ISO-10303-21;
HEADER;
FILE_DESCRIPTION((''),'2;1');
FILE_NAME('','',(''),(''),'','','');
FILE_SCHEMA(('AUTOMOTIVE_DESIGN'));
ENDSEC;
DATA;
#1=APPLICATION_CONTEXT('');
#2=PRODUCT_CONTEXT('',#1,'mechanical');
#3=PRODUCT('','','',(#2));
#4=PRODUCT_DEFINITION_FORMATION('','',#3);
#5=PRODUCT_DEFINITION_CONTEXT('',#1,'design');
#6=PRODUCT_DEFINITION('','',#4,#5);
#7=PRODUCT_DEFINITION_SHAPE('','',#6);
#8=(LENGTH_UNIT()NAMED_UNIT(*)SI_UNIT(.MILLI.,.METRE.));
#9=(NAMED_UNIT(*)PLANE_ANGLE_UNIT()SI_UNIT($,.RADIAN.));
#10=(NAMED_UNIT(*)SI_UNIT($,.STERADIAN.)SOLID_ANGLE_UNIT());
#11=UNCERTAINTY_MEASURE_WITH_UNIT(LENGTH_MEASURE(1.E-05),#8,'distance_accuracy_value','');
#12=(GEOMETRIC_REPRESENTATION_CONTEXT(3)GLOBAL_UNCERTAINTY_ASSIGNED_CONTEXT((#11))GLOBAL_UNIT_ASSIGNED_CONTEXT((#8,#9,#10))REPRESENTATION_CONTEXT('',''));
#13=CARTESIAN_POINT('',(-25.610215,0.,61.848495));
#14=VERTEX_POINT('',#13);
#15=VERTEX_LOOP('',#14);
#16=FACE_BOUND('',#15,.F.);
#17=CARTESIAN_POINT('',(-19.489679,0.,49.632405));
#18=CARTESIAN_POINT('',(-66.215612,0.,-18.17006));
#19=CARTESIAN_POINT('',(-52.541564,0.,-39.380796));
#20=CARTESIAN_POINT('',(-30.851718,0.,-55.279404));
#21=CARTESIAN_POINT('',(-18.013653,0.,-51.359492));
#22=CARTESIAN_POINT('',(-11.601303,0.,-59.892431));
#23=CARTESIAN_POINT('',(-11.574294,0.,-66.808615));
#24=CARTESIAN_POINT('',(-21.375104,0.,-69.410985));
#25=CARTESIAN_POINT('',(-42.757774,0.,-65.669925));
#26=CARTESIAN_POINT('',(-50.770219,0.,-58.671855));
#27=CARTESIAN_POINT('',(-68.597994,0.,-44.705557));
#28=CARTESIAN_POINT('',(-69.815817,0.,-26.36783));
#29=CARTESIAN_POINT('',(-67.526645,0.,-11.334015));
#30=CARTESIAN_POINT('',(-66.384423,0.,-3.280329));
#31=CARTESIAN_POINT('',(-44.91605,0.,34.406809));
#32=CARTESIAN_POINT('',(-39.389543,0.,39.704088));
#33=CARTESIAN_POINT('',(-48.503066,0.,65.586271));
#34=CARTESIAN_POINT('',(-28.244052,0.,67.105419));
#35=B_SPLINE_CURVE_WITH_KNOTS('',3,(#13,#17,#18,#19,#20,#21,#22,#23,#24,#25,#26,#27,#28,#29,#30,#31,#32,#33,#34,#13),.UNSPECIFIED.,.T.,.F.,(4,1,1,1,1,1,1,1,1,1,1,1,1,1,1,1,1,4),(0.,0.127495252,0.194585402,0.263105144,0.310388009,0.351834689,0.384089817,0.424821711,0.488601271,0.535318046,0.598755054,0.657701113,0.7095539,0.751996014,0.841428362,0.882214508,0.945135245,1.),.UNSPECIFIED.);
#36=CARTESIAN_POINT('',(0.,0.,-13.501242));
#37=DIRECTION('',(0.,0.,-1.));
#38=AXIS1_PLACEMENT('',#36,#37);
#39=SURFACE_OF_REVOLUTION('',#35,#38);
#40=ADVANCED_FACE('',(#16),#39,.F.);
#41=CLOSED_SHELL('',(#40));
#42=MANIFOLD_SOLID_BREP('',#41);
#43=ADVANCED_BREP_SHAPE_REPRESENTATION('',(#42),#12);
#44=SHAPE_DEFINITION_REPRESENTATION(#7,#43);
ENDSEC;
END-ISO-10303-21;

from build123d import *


with BuildPart() as f1:
    # F0 (on Front) → F1 (revolve)
    with BuildSketch(Plane.XZ):
        with BuildLine():
            add(Edge.make_bspline(
                [(-25.6102147929, 61.8484951556), (-19.4896790224, 49.6324052715), (-66.2156119978, -18.1700595461), (-52.5415644786, -39.3807960779), (-30.8517184463, -55.2794042637), (-18.0136531138, -51.3594918991), (-11.6013032839, -59.8924308511), (-11.5742936307, -66.8086153132), (-21.3751043638, -69.4109851577), (-42.7577735512, -65.6699253484), (-50.7702194774, -58.671854983), (-68.5979939867, -44.7055573728), (-69.8158166263, -26.367830304), (-67.5266448655, -11.3340150059), (-66.384422734, -3.2803288068), (-44.9160500553, 34.4068090372), (-39.389543016, 39.7040882329), (-48.5030660848, 65.5862712276), (-28.244051641, 67.1054185497), (-25.6102147929, 61.8484951556)],
                knots=[0, 0, 0, 0, 0.1274952524, 0.1945854023, 0.2631051441, 0.3103880092, 0.351834689, 0.3840898167, 0.4248217112, 0.4886012713, 0.5353180464, 0.598755054, 0.6577011126, 0.7095539001, 0.7519960135, 0.8414283616, 0.8822145077, 0.9451352453, 1, 1, 1, 1], degree=3))
        make_face()
    revolve(axis=Axis((0, 0, -13.5012418032), (0, 0, -1)))


solid = f1.part
